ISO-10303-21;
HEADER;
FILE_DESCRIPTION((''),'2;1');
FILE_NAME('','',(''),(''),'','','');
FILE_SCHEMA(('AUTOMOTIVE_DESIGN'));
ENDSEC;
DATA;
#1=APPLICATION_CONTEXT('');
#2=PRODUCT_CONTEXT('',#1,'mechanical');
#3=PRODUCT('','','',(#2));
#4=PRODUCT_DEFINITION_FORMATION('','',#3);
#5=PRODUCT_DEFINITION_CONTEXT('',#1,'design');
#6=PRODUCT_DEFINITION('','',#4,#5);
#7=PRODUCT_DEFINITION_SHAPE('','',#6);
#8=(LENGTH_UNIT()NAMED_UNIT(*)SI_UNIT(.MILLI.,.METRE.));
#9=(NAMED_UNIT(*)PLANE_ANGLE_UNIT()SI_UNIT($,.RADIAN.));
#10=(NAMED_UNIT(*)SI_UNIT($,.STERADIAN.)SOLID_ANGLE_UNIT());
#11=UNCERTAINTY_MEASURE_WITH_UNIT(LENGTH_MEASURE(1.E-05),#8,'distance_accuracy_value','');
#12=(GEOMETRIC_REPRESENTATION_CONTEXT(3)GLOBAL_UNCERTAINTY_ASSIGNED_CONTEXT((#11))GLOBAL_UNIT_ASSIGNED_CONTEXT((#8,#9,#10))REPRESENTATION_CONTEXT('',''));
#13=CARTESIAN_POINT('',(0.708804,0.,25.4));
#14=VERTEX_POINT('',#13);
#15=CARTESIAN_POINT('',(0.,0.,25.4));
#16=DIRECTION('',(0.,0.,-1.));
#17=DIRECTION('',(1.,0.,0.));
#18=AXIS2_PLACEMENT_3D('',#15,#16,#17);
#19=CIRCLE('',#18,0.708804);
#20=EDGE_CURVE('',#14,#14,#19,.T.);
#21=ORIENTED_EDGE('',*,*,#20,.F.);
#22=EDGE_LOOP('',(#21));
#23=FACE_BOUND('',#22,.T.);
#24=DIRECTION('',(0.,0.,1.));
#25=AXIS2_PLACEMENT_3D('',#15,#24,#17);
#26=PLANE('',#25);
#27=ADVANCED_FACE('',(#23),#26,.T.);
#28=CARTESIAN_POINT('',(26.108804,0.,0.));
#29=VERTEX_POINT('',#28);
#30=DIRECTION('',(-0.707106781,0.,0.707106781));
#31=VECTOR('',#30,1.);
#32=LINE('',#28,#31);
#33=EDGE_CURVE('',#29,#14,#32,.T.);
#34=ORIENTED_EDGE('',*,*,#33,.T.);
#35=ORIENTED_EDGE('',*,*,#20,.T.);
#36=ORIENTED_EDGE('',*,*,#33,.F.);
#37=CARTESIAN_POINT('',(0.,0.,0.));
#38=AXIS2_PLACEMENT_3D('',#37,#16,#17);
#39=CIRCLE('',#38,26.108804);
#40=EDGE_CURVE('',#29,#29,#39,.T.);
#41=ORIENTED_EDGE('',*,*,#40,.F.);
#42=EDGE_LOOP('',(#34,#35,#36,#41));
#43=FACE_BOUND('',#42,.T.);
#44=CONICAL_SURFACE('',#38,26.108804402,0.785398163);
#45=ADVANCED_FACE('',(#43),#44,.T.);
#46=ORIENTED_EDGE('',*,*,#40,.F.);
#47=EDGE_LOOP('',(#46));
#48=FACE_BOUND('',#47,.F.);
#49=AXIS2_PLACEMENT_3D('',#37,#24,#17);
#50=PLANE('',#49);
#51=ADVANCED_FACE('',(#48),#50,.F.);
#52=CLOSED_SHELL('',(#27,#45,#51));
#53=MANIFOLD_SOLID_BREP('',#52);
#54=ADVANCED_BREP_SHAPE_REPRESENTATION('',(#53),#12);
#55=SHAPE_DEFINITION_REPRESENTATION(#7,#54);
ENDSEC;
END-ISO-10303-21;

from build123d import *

# Parameters (mm, degrees)
F0_R     = 26.1088044018
F1_DEPTH = 25.4
F1_TAPER = 45


# Not quite as in the source:
# - a feature of the source that left no trace in its solid (it failed there, or was rolled back) is left out


with BuildPart() as f1:
    # F0 (on Top) → F1 (new body)
    with BuildSketch(Plane.XY):
        Circle(F0_R)
    extrude(amount=F1_DEPTH, taper=F1_TAPER)


solid = f1.part
